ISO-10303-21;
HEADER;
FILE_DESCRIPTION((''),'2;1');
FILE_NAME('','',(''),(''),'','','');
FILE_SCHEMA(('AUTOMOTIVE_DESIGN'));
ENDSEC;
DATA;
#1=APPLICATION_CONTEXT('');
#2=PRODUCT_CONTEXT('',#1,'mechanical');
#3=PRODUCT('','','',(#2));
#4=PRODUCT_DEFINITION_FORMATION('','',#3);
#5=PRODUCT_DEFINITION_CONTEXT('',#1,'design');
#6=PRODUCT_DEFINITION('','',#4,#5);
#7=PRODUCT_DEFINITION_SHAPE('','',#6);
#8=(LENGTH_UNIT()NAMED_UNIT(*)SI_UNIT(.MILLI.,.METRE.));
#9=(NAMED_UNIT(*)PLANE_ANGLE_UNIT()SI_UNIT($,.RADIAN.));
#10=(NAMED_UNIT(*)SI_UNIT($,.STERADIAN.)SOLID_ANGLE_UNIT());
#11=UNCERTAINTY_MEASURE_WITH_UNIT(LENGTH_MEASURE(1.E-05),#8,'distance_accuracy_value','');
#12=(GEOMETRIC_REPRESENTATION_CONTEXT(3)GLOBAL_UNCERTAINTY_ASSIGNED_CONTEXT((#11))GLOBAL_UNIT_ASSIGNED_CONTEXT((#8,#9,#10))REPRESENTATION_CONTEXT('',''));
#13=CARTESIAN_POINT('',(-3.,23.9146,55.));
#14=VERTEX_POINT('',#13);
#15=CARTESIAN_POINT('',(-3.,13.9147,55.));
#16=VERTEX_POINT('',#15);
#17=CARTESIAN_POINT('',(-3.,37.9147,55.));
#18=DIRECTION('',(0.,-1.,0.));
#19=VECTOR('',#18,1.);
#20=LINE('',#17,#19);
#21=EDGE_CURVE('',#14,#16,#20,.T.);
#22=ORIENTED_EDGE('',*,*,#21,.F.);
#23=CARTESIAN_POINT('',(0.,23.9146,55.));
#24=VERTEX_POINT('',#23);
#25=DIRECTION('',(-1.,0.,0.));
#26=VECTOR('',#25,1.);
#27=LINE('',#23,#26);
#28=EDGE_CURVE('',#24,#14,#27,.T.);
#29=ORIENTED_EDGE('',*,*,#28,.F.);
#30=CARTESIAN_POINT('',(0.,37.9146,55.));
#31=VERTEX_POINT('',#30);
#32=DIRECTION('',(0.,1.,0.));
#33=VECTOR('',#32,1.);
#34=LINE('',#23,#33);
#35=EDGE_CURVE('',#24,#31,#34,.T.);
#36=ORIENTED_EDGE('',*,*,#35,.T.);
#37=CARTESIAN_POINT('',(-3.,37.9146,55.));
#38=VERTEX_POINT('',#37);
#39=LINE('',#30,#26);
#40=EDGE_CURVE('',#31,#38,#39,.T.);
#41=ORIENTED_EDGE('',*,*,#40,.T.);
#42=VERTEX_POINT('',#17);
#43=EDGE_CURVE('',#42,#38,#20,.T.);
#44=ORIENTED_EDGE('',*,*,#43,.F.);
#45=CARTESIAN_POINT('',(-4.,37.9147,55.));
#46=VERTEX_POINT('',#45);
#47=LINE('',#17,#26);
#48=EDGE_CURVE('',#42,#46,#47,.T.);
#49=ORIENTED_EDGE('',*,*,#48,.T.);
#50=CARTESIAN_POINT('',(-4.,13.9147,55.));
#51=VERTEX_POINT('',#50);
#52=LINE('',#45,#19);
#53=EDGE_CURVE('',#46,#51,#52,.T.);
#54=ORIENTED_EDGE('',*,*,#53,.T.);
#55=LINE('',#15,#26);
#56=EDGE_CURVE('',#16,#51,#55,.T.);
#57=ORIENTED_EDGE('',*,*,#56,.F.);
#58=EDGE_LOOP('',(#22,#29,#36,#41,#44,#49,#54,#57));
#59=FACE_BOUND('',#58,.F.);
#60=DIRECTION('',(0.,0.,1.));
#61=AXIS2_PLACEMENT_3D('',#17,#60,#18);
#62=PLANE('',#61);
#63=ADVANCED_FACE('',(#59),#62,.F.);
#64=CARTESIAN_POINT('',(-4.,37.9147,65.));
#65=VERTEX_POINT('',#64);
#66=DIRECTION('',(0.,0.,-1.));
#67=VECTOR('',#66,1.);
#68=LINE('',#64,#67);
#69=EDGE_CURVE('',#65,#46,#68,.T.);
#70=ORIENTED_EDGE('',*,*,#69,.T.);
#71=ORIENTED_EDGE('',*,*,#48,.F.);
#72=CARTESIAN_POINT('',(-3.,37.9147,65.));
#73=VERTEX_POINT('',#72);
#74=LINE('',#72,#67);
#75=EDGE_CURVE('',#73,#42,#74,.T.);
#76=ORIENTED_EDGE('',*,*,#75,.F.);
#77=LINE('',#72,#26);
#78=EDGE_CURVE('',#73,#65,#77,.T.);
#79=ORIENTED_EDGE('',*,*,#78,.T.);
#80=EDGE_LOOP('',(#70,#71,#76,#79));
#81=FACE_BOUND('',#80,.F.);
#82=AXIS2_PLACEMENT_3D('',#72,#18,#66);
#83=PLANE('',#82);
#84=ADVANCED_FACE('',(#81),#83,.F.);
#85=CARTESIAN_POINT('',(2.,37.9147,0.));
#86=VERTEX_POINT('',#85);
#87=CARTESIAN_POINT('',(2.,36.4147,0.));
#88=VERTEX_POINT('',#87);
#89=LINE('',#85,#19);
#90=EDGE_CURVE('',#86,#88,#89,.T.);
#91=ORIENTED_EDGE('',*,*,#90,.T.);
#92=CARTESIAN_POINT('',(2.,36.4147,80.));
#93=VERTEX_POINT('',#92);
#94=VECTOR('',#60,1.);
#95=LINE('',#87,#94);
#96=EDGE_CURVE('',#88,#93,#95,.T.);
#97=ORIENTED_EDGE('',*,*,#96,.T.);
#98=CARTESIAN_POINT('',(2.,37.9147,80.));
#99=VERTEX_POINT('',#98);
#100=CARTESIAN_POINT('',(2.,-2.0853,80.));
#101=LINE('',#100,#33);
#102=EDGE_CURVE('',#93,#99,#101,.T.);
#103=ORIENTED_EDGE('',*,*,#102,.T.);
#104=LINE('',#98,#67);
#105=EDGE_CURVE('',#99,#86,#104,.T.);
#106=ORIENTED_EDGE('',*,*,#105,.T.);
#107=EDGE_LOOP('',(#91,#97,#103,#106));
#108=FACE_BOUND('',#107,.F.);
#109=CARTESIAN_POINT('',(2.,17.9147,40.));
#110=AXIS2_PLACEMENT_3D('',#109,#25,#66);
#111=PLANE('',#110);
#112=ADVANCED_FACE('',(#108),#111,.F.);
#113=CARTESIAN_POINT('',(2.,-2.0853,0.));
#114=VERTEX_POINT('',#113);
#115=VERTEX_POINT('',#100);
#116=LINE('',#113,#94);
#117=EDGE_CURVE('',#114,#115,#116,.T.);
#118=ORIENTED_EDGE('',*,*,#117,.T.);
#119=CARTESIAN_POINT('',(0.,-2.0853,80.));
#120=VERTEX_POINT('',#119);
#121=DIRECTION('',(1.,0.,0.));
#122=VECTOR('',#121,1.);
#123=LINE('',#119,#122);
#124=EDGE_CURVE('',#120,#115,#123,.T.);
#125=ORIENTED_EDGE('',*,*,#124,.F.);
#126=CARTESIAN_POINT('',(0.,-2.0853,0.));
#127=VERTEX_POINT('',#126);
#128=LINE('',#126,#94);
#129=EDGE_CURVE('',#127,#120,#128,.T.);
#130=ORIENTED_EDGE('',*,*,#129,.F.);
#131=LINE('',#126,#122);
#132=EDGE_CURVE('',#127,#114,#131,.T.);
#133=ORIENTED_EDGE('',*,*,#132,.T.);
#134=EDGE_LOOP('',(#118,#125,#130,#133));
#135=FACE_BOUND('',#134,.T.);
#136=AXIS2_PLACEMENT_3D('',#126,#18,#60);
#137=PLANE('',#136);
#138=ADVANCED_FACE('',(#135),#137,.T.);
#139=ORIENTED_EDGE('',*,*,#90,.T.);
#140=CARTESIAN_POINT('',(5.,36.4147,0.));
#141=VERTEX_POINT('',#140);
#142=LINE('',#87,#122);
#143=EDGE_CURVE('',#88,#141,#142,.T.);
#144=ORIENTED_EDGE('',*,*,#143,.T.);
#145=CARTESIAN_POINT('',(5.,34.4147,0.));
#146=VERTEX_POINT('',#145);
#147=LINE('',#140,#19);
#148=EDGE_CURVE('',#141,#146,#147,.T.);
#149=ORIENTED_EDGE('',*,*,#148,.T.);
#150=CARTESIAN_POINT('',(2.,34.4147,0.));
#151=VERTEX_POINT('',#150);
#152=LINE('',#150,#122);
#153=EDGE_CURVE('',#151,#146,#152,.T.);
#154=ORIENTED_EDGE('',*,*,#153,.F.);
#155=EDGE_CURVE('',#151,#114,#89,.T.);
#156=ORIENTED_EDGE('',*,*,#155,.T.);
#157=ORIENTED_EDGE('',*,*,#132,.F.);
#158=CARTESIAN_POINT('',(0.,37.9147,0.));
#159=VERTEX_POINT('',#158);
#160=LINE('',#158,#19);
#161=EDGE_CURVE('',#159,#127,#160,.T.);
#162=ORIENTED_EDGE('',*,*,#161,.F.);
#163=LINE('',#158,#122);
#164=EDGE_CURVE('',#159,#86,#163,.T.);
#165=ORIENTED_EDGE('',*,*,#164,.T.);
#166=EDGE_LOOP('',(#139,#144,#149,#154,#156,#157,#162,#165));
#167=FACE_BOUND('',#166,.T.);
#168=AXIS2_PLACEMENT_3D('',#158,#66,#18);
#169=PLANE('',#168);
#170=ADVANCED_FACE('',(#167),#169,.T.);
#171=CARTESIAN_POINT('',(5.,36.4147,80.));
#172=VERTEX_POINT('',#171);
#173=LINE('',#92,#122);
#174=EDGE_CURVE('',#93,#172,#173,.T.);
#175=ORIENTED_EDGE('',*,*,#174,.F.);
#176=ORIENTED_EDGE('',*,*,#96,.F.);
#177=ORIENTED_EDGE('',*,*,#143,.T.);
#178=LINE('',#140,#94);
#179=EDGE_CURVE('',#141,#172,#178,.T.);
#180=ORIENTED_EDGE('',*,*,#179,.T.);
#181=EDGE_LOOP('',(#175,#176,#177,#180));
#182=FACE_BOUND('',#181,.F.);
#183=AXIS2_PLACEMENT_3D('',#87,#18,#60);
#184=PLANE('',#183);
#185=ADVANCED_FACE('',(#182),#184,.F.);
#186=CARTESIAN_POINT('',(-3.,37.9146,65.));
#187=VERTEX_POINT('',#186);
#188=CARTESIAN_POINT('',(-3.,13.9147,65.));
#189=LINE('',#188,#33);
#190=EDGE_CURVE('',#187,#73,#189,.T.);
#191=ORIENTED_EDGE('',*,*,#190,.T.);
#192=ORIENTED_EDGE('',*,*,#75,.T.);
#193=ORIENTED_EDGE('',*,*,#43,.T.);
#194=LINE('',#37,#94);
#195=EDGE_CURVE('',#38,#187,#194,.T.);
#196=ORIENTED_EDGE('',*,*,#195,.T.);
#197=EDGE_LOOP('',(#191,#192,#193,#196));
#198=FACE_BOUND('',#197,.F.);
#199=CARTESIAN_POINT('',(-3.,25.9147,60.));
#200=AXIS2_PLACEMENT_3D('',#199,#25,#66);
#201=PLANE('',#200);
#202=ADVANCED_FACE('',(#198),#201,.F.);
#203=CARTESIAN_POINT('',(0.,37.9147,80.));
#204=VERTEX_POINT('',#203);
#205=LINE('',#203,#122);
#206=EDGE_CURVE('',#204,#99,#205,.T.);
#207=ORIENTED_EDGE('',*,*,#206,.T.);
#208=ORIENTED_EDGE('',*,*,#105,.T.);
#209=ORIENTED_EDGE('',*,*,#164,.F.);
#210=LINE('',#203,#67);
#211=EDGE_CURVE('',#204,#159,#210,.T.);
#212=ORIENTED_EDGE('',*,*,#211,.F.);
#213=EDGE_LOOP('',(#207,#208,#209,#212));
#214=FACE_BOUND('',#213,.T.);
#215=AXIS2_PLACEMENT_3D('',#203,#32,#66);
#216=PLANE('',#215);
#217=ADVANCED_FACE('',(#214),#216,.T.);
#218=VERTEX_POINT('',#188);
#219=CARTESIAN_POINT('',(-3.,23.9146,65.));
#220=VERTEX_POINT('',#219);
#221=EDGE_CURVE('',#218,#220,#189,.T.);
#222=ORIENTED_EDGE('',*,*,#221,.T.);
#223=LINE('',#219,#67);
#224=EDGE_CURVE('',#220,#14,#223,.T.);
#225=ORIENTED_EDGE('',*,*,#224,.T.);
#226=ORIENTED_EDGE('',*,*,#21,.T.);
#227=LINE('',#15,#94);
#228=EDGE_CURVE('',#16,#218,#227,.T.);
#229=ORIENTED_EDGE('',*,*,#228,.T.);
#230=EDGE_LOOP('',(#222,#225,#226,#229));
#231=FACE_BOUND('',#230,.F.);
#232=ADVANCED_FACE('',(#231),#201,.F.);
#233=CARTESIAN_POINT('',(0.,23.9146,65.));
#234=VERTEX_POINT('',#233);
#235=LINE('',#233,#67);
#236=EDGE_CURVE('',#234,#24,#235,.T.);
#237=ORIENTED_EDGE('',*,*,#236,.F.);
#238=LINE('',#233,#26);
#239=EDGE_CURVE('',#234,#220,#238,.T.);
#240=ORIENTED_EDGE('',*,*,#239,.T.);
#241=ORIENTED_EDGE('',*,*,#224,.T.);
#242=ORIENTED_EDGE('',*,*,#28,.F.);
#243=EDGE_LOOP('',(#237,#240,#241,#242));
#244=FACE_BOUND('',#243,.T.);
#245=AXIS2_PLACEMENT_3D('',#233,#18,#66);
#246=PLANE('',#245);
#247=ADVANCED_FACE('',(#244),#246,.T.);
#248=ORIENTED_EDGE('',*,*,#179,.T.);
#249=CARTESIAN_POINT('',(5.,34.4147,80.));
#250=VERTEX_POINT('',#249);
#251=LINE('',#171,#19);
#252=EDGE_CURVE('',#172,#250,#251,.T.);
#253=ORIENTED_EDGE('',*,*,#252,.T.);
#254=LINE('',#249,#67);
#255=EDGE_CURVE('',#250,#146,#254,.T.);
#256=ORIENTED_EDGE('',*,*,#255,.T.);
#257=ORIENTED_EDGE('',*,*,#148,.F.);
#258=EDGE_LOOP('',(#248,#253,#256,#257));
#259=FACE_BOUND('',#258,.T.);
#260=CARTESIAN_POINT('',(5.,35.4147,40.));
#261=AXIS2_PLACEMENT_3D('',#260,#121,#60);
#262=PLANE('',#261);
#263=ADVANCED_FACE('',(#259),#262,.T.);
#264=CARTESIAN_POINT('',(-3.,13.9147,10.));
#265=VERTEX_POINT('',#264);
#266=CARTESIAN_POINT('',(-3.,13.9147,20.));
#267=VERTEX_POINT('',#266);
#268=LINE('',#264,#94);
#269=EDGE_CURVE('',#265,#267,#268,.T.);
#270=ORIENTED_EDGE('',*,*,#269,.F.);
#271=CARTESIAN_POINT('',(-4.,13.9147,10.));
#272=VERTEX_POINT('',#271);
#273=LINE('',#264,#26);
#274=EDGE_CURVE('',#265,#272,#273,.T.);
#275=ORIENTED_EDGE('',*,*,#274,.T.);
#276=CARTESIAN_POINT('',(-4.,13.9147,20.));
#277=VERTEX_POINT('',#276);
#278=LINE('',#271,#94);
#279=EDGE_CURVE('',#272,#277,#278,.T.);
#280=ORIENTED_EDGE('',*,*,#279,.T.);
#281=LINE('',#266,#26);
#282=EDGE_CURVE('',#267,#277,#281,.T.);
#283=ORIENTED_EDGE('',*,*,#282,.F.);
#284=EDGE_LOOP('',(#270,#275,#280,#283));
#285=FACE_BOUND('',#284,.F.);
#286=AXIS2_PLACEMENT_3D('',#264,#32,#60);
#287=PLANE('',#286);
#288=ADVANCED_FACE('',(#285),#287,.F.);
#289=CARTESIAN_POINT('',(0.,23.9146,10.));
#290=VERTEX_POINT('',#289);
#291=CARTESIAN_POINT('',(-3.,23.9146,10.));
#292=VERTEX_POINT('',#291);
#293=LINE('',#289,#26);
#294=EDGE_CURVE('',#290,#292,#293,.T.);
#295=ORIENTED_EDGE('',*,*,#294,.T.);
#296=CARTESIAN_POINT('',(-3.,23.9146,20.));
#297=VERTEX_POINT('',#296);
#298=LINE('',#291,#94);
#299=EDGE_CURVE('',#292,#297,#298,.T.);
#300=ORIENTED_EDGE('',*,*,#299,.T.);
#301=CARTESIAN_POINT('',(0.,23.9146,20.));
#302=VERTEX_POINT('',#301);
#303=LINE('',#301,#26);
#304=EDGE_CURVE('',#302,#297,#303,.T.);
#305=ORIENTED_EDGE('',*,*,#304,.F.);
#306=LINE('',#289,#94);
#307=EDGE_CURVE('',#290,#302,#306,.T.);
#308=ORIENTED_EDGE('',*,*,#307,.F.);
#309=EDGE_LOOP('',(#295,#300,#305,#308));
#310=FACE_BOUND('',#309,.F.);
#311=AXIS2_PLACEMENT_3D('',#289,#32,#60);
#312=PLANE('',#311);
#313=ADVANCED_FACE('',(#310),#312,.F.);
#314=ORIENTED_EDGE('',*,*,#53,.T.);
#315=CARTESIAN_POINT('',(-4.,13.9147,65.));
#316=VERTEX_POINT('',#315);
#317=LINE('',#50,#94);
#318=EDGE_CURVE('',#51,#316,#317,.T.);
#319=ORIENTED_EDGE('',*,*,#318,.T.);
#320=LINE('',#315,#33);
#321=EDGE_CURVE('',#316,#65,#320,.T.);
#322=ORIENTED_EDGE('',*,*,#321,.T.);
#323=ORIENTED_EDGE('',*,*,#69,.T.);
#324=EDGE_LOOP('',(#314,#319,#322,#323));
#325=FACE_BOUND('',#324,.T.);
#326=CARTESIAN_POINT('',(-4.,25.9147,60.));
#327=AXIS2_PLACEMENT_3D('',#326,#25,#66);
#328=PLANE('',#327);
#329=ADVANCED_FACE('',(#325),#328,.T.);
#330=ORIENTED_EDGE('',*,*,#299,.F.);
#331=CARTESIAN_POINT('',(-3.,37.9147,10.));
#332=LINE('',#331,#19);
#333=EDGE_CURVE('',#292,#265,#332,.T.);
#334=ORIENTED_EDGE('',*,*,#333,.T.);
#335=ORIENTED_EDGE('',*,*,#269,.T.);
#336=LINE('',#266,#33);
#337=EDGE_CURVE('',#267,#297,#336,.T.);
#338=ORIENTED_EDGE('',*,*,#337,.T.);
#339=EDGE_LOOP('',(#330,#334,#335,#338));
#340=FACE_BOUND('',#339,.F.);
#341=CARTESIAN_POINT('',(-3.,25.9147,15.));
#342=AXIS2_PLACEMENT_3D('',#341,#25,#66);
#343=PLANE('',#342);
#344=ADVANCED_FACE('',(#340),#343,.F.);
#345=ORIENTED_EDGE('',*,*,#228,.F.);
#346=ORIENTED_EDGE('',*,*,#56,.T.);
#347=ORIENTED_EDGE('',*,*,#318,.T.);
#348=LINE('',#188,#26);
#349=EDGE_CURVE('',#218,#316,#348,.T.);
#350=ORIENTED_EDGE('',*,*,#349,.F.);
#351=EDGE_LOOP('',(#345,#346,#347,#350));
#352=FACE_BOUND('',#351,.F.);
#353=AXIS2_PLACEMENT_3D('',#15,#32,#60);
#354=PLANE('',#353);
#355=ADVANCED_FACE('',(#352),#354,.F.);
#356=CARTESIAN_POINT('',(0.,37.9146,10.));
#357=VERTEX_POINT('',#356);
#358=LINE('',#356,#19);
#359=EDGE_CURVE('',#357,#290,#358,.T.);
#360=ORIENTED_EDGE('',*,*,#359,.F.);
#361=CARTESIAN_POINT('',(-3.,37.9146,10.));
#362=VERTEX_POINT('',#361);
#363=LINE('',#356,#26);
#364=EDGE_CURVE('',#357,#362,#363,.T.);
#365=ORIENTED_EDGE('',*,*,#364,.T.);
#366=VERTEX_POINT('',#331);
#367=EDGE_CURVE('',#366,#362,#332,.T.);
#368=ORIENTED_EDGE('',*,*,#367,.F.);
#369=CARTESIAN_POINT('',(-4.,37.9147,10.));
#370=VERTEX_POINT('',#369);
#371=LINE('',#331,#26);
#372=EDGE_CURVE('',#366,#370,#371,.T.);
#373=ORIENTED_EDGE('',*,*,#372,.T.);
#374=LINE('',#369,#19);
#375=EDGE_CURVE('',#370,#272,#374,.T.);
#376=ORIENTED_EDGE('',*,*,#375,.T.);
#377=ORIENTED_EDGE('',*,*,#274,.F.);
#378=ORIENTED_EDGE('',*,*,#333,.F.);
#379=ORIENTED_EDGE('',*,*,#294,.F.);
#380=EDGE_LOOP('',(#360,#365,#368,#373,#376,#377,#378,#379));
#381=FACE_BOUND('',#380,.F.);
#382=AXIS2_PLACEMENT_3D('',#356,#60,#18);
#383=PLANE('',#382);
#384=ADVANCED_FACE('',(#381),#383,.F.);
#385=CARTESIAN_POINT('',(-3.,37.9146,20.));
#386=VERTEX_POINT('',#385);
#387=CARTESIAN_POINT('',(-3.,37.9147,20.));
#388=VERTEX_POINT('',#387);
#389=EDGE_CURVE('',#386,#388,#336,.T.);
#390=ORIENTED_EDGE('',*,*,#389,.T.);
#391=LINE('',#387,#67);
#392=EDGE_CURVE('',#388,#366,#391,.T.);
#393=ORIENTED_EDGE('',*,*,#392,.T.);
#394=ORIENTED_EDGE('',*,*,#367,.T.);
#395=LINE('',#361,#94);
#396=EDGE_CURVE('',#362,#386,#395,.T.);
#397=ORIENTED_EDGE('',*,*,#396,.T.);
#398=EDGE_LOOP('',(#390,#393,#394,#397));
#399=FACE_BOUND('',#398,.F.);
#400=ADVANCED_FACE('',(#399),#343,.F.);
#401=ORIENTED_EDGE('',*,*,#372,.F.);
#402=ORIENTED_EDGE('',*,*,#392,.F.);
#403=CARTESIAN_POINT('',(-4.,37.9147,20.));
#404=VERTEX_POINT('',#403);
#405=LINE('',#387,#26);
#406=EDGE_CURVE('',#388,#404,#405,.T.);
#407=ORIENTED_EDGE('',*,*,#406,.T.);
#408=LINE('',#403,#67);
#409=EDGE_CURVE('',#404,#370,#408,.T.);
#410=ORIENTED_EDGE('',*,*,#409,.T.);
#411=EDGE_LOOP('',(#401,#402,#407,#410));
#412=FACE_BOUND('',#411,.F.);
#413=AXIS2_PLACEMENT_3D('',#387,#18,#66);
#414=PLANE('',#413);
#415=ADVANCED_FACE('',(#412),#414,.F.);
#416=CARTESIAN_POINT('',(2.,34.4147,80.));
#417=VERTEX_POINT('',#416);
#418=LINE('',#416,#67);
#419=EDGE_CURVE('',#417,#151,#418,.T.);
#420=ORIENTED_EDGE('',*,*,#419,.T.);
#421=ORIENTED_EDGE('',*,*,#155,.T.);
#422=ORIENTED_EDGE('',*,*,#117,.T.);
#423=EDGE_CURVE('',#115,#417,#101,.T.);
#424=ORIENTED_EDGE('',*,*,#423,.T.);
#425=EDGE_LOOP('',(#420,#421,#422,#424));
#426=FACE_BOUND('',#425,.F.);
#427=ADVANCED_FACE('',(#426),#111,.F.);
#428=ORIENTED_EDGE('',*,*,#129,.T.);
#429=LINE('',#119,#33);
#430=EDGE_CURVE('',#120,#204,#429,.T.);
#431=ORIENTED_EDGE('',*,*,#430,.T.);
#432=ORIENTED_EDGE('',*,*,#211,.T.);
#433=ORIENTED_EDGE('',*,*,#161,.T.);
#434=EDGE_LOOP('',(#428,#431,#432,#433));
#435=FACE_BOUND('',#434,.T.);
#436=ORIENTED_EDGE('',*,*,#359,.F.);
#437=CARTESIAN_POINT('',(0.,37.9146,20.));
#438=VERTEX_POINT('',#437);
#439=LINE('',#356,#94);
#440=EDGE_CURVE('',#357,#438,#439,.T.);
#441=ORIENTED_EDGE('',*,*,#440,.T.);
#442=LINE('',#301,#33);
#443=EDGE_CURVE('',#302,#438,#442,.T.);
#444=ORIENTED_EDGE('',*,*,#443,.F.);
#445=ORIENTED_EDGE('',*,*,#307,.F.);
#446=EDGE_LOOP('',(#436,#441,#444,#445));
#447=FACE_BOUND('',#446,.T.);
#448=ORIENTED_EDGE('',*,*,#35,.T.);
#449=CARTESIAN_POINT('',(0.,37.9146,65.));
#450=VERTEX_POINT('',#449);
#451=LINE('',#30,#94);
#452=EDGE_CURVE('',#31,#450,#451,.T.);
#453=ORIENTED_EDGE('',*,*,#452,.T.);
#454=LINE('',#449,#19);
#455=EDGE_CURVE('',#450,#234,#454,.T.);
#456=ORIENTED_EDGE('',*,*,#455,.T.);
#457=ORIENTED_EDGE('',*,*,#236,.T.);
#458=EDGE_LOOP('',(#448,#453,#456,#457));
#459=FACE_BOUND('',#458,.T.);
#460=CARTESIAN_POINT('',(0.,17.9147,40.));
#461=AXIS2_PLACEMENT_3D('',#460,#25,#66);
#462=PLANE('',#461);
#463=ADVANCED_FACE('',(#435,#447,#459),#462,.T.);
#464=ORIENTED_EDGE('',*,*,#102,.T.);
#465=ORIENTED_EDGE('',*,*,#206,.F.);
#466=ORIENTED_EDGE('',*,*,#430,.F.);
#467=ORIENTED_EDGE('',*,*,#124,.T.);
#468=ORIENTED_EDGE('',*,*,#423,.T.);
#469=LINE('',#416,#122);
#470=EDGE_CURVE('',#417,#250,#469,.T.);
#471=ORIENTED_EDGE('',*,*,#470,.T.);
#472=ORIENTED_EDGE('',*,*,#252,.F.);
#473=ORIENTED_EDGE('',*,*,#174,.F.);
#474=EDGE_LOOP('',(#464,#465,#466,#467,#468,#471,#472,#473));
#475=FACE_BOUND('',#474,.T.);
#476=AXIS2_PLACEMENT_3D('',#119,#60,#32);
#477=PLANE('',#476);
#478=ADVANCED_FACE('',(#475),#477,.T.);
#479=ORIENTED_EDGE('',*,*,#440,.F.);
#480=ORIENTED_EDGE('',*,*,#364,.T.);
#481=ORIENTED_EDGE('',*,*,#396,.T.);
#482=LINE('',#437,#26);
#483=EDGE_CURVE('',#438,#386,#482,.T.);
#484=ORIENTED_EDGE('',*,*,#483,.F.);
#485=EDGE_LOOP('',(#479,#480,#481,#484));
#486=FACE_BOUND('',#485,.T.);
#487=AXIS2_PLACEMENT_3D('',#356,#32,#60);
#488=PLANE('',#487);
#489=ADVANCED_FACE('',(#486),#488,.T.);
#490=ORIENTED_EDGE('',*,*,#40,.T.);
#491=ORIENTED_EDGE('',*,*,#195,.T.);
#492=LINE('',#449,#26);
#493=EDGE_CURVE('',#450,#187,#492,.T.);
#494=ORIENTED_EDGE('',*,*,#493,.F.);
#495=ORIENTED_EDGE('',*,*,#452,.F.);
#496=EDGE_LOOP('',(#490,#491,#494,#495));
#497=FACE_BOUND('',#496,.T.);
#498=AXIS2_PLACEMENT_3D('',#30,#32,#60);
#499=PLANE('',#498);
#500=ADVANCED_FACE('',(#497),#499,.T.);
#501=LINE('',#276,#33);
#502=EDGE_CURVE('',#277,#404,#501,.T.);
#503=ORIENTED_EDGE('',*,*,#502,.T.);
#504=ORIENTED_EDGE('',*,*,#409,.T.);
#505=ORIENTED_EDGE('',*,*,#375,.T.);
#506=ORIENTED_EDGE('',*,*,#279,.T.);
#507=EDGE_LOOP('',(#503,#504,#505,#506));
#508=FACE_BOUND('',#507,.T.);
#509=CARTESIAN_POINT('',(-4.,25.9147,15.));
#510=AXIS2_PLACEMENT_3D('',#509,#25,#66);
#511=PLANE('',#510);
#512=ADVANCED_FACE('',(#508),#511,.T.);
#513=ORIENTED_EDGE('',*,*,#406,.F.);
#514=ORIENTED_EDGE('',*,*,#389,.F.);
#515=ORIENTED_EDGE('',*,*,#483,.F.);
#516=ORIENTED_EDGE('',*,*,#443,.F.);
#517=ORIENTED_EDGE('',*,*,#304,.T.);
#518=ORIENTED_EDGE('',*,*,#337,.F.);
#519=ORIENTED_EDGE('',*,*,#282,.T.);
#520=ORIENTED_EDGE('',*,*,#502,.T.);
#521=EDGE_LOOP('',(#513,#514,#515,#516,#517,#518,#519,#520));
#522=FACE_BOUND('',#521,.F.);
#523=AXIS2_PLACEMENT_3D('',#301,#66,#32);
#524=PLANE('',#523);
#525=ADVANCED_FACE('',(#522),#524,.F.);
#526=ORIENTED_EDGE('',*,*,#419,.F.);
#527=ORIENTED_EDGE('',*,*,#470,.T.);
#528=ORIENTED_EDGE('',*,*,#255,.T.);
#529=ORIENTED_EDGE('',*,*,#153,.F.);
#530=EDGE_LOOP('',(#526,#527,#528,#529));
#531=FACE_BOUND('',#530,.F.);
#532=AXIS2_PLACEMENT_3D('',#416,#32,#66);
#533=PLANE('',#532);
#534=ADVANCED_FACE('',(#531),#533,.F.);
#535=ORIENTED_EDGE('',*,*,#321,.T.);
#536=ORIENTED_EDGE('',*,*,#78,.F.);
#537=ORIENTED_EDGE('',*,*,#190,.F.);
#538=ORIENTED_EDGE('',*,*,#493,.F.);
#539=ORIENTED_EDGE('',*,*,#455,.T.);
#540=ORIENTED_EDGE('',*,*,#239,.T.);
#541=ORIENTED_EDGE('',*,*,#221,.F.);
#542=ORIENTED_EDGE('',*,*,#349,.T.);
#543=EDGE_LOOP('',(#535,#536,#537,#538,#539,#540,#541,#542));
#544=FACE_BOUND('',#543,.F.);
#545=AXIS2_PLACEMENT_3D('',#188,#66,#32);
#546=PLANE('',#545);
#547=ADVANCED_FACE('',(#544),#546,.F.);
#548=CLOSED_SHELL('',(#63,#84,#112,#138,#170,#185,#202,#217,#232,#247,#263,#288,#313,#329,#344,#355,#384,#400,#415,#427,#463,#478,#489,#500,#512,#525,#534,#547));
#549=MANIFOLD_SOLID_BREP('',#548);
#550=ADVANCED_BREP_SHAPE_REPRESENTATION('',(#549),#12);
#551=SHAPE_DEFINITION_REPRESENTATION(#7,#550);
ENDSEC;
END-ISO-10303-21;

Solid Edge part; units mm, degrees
sketch "Sketch1" plane through (0, 0, 0) normal (-1, 0, 0) x (0, -1, 0)
  line L0 (2.0853, 0) -> (2.0853, 80)
  line L1 (2.0853, 80) -> (-37.9147, 80)
  line L2 (-37.9147, 80) -> (-37.9147, 0)
  line L3 (-37.9147, 0) -> (2.0853, 0)
extrude "Protrusion1" add sketch "Sketch1" against normal blind 2
sketch "Sketch2" plane through (0, 18.9573, 40) normal (-1, 0, 0) x (0, 0, 1)
  line L0 (-20, 4.9573) -> (-20, 18.9573)
  line L1 (-30, 18.9573) -> (-20, 18.9573)
  line L2 (-30, 18.9573) -> (-30, 4.9573)
  line L3 (-30, 4.9573) -> (-20, 4.9573)
  line L4 (25, 18.9573) -> (25, 4.9573)
  line L5 (25, 4.9573) -> (15, 4.9573)
  line L6 (15, 4.9573) -> (15, 18.9573)
  line L7 (15, 18.9573) -> (25, 18.9573)
extrude "Vysunutí_2" add sketch "Sketch2" along normal blind 3
sketch "Sketch3" plane through (-3, 30.9147, 60) normal (-1, 0, 0) x (0, 0, 1)
  line L0 (5, -17) -> (5, 7)
  line L1 (5, 7) -> (-5, 7)
  line L2 (-5, 7) -> (-5, -17)
  line L3 (-5, -17) -> (5, -17)
  line L4 (-40, -17) -> (-40, 7)
  line L5 (-40, 7) -> (-50, 7)
  line L6 (-50, 7) -> (-50, -17)
  line L7 (-50, -17) -> (-40, -17)
extrude "Vysunutí_3" add sketch "Sketch3" along normal blind 1
sketch "Sketch4" plane through (2, 17.9147, 40) normal (1, 0, 0) x (0, 0, 1)
  line L0 (-40, -18.5) -> (40, -18.5)
  line L1 (40, -18.5) -> (40, -16.5)
  line L2 (40, -16.5) -> (-40, -16.5)
extrude "Vysunutí_4" add sketch "Sketch4" along normal blind 3 material side at (2, 36.3647, 40)
